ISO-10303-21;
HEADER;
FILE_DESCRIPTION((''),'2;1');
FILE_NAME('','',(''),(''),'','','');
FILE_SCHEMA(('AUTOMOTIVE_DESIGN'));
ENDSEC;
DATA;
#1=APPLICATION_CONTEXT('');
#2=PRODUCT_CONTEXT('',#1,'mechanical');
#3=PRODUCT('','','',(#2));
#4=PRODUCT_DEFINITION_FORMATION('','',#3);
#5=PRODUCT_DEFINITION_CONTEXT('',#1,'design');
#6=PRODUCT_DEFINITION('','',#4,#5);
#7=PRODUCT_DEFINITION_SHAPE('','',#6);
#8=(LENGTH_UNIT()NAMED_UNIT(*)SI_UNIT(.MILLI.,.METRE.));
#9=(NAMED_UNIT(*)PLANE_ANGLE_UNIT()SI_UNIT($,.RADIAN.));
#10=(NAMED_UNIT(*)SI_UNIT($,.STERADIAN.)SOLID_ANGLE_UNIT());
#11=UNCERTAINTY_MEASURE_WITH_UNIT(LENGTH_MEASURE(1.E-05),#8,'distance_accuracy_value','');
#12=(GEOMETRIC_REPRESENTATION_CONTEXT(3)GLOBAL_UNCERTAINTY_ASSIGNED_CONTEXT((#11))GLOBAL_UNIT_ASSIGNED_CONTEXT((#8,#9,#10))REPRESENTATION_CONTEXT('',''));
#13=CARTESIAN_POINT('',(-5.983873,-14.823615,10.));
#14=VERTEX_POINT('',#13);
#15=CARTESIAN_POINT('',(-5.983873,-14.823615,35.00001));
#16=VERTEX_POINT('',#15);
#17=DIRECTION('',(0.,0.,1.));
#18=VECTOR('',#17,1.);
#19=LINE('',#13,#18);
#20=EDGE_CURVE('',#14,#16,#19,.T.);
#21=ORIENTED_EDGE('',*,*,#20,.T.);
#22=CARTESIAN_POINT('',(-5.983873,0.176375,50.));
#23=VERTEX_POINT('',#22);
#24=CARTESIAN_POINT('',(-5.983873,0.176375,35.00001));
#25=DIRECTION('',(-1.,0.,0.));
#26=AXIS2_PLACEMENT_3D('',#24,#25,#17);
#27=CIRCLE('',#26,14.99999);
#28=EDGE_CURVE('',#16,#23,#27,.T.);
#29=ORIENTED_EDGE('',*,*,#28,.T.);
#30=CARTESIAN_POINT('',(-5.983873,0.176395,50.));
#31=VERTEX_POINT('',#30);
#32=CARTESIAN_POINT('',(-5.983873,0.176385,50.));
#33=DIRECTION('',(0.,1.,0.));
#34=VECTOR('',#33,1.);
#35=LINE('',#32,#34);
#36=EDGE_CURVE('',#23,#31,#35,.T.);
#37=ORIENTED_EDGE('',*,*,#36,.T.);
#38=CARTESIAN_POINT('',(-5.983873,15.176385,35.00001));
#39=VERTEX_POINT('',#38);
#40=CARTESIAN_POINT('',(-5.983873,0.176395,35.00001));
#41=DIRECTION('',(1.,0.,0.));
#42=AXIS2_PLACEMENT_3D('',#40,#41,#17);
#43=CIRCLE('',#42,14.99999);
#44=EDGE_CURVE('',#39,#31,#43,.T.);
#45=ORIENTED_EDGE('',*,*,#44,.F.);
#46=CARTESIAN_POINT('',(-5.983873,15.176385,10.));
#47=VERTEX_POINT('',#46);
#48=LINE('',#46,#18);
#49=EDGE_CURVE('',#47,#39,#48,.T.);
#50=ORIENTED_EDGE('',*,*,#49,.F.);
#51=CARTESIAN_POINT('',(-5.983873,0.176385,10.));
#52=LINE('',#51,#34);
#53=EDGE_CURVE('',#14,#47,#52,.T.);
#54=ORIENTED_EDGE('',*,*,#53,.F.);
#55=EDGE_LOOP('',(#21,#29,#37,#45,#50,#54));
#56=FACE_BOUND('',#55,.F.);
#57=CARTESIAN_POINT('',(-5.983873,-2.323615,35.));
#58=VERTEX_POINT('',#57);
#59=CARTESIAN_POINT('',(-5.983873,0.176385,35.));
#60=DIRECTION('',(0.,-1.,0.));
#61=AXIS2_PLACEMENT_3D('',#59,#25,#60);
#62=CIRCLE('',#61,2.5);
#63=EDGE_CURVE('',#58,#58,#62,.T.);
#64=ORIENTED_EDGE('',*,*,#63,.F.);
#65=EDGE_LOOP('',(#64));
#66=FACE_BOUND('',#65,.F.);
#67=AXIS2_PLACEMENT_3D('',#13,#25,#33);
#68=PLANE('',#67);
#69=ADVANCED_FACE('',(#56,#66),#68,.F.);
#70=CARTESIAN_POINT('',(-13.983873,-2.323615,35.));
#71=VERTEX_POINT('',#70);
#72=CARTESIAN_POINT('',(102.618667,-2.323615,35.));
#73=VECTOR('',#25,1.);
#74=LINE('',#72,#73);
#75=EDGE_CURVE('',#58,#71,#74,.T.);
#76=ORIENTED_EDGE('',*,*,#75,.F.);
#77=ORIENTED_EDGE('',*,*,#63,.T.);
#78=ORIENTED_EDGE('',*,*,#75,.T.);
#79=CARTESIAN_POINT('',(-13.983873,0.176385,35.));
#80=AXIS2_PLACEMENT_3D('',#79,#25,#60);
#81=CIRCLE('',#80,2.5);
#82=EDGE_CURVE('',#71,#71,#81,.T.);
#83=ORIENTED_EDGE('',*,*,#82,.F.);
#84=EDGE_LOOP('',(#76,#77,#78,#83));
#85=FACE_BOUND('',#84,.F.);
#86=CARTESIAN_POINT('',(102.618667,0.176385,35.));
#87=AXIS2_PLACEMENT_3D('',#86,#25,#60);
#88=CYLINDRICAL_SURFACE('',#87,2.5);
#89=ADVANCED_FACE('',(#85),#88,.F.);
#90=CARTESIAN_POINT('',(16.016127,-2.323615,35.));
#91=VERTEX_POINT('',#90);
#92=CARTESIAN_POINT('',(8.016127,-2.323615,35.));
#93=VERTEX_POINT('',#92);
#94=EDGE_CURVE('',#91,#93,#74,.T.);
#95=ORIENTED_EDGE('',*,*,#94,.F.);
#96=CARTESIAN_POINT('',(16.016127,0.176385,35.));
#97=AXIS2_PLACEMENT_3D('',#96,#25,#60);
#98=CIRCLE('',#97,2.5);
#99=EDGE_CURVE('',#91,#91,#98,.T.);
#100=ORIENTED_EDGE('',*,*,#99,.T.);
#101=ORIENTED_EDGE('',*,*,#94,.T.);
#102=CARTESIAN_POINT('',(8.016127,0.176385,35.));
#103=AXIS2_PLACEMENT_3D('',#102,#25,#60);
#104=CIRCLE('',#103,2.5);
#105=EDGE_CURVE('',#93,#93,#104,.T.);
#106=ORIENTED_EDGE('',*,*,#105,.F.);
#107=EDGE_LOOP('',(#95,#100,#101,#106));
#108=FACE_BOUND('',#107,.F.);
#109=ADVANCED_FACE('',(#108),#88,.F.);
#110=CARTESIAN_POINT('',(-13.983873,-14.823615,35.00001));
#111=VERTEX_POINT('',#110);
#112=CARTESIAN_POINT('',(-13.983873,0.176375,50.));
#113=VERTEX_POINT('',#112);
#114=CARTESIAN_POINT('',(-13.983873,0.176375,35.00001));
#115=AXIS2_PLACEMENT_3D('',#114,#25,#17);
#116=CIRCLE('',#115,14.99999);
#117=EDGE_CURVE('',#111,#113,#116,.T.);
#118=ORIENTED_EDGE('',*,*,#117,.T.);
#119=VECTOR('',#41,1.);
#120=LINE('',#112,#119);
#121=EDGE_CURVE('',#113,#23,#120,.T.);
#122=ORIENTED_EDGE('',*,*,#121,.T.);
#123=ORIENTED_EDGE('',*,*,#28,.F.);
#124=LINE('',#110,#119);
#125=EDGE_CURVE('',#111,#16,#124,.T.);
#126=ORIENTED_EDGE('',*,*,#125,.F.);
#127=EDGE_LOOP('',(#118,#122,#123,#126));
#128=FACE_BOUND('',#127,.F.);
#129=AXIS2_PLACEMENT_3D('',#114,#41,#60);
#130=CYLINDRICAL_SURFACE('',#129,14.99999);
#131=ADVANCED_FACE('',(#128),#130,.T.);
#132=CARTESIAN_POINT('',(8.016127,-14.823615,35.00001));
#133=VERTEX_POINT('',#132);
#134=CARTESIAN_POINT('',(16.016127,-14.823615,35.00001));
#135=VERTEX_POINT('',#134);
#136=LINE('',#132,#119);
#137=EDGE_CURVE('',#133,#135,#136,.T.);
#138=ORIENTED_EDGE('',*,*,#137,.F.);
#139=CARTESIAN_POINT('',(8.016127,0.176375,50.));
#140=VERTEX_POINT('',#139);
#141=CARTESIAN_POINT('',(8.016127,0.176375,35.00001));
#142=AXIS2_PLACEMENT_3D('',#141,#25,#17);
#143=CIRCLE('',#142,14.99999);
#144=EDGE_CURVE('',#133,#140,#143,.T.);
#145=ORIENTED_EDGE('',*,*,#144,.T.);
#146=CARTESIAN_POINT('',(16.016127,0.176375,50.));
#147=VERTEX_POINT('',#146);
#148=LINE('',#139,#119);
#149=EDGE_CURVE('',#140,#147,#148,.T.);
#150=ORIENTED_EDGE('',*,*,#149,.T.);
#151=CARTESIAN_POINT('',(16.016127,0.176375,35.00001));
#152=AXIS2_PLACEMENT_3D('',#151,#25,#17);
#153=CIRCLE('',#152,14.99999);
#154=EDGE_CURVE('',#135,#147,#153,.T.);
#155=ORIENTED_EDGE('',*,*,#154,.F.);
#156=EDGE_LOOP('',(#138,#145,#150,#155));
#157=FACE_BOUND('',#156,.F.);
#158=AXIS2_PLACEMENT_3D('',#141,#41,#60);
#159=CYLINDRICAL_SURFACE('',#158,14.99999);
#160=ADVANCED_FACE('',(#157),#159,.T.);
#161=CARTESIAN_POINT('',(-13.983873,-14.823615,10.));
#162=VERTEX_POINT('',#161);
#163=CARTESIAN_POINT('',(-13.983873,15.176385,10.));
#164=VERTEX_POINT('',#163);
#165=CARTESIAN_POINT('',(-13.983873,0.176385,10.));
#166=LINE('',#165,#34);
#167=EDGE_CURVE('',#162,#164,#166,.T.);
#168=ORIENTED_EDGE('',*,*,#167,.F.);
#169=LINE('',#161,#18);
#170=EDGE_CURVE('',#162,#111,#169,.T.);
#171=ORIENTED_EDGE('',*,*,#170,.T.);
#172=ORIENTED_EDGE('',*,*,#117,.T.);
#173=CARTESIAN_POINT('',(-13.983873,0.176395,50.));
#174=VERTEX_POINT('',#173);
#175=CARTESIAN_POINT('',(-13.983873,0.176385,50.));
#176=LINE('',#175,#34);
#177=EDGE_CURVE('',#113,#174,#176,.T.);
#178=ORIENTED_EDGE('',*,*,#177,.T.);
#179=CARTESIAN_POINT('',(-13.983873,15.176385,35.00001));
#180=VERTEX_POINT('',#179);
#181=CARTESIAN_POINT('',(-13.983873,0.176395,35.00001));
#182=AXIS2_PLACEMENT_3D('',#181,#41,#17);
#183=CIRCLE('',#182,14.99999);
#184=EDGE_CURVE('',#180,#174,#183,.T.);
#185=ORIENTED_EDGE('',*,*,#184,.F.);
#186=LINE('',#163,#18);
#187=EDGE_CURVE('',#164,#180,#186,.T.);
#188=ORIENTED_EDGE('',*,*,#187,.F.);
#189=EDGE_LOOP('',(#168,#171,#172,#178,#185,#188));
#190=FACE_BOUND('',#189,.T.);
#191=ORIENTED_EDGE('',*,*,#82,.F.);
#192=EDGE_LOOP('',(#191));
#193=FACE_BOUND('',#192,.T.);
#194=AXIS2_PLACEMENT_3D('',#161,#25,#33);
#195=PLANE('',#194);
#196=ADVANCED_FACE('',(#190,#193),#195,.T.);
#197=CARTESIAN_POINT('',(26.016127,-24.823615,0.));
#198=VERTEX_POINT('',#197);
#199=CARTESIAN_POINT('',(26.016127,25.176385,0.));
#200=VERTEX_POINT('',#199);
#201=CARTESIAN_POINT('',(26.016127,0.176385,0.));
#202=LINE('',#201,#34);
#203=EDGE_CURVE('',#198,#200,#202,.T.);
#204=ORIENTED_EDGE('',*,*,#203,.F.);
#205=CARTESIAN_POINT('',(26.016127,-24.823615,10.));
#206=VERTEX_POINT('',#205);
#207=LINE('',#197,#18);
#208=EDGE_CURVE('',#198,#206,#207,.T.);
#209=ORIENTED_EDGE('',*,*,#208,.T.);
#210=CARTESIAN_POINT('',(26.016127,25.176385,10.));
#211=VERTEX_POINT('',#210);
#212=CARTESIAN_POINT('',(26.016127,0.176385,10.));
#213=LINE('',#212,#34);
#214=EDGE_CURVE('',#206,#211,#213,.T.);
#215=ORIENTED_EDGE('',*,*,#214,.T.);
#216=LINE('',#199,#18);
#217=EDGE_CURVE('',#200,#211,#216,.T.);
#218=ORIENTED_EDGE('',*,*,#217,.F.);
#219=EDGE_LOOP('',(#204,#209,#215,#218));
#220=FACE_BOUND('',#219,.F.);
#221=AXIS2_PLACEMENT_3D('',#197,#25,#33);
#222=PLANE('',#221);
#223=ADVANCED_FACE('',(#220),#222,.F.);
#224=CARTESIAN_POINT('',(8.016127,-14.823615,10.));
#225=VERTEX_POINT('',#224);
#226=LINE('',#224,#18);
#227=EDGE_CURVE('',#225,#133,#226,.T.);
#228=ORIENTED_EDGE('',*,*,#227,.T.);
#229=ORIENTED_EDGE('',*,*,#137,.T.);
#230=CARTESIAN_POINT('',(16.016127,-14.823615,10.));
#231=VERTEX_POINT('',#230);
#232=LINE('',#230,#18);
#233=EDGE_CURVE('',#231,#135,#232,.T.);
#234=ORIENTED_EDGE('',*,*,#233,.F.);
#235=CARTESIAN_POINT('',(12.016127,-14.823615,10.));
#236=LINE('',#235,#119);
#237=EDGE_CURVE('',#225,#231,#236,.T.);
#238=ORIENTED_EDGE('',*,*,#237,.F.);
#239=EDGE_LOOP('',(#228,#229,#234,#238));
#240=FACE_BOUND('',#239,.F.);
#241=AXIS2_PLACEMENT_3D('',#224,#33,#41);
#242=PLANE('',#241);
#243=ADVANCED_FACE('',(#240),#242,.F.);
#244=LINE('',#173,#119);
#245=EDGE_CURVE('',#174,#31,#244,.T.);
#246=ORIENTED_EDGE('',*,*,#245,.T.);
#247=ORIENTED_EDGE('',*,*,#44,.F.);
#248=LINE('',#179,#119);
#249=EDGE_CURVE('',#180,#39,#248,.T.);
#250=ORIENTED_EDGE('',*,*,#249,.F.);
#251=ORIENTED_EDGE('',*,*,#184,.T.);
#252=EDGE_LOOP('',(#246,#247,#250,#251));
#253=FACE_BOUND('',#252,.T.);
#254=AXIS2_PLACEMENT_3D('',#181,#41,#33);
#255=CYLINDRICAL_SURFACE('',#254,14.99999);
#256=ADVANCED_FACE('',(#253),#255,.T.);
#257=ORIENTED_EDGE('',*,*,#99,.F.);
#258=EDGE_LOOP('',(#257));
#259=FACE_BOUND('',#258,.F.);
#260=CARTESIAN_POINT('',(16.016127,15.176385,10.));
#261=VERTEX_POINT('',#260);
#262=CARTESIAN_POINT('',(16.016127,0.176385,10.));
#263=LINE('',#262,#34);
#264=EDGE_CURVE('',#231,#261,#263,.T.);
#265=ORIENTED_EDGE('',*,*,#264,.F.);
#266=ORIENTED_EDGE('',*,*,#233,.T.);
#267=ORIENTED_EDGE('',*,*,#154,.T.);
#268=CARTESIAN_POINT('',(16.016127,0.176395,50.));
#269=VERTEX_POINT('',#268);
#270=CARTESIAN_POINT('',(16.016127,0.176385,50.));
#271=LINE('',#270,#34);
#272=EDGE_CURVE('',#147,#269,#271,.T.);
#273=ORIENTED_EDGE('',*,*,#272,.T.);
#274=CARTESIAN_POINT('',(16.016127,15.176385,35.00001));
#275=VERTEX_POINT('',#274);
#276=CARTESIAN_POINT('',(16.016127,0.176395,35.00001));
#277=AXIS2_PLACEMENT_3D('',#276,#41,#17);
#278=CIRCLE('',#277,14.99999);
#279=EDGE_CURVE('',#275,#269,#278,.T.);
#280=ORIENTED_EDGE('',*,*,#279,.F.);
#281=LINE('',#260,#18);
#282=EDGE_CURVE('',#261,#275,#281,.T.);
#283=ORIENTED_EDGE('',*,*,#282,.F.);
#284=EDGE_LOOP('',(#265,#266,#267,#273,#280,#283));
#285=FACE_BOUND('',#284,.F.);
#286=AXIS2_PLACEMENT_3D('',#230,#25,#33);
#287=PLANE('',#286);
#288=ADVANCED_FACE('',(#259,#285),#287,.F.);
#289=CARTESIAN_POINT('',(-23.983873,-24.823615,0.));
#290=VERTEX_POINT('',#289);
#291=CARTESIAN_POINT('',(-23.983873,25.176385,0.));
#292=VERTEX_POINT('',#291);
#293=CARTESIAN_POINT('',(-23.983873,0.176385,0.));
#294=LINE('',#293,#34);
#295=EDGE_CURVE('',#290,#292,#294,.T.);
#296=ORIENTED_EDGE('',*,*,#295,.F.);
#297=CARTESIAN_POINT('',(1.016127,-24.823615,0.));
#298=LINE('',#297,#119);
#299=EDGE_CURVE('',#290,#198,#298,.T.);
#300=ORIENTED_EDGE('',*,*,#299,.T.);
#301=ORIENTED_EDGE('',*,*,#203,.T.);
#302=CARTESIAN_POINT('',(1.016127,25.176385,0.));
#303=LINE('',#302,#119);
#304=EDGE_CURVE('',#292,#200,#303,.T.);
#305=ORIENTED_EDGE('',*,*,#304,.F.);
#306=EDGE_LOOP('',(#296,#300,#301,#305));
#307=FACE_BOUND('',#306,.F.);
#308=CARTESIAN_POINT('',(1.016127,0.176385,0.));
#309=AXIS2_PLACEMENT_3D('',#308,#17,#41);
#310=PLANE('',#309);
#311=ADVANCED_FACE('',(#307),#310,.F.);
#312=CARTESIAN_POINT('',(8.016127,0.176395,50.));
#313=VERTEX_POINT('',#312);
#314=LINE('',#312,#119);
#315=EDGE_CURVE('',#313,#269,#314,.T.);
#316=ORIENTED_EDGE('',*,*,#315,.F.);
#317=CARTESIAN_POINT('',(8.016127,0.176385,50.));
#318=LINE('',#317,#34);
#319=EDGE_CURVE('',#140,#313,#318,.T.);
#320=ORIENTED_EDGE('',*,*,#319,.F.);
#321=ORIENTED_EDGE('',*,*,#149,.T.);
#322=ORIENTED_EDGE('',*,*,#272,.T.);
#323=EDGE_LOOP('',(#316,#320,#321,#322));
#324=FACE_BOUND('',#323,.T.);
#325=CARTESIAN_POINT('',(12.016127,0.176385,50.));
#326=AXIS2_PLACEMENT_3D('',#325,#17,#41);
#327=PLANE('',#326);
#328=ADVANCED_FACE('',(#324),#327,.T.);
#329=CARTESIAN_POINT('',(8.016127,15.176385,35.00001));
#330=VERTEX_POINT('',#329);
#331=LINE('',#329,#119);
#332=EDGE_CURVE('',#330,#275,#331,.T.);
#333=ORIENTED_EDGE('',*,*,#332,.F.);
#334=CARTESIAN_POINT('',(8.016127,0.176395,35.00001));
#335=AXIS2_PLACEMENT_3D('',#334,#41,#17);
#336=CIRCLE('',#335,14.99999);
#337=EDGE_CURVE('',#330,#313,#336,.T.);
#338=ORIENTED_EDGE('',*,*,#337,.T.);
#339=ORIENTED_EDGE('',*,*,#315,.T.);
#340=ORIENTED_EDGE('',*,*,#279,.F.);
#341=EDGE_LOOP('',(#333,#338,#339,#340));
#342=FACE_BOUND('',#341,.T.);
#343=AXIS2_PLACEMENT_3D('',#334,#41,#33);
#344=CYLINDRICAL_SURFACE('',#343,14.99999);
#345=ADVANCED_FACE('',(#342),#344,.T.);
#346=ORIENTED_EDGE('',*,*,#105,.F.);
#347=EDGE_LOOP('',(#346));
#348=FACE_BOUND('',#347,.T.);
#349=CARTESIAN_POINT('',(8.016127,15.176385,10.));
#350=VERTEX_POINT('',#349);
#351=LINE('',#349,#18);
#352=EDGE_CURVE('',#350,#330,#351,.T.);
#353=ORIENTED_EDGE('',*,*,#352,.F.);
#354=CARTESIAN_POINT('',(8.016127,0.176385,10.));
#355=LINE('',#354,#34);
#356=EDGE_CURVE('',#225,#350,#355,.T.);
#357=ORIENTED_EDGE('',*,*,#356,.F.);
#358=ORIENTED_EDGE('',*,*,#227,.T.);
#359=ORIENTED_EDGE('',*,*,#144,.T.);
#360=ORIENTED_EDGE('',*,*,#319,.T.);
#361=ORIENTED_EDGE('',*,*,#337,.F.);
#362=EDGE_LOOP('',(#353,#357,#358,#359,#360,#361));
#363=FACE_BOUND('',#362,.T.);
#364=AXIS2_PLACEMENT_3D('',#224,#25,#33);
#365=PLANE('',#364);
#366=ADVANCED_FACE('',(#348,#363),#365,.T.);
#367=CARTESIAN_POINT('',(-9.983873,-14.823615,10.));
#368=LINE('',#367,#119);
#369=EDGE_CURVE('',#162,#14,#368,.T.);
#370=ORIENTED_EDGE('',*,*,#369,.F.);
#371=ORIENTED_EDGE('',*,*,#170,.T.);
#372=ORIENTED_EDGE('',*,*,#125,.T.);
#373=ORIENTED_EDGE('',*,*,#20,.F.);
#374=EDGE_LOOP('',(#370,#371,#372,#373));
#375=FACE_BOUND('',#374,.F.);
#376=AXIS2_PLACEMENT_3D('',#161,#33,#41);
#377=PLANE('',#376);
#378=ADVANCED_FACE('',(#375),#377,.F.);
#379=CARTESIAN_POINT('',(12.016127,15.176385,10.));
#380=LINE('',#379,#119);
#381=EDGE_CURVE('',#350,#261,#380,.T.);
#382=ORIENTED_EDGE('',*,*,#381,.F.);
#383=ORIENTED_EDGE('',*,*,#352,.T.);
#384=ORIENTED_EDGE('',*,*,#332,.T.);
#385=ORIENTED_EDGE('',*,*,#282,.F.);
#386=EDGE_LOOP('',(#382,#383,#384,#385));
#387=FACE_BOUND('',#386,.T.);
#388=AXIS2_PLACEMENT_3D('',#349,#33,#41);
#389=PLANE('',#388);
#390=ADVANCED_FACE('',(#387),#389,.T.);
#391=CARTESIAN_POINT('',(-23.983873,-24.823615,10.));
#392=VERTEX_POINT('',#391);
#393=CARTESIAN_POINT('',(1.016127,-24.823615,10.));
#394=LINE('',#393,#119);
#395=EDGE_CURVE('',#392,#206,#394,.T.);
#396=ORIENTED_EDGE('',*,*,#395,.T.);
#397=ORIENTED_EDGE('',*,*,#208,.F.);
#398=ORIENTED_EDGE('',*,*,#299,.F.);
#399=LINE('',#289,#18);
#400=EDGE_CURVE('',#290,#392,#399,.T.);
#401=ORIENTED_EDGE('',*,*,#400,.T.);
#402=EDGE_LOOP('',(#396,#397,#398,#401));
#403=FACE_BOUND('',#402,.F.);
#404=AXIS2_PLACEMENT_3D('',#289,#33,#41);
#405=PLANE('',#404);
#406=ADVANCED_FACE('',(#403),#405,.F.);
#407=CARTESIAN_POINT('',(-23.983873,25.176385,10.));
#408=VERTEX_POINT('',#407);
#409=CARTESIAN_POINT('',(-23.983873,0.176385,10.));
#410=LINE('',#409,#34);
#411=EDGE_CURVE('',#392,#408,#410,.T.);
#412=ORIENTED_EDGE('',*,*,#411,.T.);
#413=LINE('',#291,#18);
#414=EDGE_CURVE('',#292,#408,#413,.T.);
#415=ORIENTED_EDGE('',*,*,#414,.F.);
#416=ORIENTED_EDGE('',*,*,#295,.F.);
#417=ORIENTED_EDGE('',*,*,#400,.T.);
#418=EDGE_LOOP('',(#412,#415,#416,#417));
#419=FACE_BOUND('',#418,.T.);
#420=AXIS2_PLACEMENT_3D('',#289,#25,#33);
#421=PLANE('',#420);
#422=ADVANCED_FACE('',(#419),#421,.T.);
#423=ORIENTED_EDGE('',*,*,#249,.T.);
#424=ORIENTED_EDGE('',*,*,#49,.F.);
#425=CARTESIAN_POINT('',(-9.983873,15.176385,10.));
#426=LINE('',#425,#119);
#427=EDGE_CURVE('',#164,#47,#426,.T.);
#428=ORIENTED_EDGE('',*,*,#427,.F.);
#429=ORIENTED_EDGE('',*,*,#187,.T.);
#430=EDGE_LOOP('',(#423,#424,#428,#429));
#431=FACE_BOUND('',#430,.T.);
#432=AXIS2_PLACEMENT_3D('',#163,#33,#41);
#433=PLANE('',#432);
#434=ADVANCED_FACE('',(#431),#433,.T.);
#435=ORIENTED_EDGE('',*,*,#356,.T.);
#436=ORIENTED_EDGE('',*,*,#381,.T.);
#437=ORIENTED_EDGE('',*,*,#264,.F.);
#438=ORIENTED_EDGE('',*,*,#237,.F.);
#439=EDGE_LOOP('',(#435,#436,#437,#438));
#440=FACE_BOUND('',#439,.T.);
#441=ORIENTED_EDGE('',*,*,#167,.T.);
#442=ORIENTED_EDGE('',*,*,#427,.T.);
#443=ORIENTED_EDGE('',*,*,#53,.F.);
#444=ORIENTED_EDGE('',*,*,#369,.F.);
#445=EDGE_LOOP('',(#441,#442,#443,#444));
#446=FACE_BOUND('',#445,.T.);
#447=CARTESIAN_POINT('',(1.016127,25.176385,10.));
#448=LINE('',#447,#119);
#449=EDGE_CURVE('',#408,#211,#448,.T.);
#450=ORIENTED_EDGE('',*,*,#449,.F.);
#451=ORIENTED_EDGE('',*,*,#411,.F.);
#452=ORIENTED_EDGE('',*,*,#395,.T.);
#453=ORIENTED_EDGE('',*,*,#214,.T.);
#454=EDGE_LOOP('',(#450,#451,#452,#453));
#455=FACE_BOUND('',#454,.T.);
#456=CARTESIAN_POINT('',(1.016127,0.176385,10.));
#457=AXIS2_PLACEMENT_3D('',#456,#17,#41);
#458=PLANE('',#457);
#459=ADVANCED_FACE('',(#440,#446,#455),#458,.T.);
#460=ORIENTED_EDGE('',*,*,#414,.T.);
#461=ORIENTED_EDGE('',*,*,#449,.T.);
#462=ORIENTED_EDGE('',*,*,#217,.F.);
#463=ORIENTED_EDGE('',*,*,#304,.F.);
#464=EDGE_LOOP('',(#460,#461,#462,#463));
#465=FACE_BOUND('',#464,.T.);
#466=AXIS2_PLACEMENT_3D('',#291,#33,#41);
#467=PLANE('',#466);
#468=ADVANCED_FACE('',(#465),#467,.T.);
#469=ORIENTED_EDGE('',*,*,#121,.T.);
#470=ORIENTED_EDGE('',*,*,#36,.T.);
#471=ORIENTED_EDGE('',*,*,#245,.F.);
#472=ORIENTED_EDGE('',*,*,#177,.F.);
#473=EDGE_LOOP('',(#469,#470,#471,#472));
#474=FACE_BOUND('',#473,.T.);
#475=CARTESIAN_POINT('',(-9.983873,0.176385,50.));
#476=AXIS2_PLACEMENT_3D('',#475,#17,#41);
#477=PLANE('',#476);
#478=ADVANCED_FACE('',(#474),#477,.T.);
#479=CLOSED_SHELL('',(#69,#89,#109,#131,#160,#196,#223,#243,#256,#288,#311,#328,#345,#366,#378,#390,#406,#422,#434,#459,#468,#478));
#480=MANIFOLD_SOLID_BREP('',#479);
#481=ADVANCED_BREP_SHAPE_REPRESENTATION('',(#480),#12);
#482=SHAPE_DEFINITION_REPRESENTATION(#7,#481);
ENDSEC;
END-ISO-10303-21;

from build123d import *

# Parameters (mm, degrees)
F0_W     = 50
F0_H     = 50
F1_DEPTH = 10
F2_W     = 8
F2_H     = 30
F3_DEPTH = 40
F4_R     = 14.99999
F6_D     = 5


# Not quite as in the source:
# - a fillet or chamfer is up to 0.001 mm smaller than in the source, because OpenCascade refuses the exact size


with BuildPart() as f1:
    # F0 (on Top) → F1 (new body)
    with BuildSketch(Plane.XY):
        with Locations((1.0161269456, 0.1763854405)):
            Rectangle(F0_W, F0_H)
    extrude(amount=F1_DEPTH)

    # F2 (on face) → F3 (join)
    with BuildSketch(Plane.XY.offset(10)):
        with Locations((-9.9838730544, 0.1763854405)):
            Rectangle(F2_W, F2_H)
        with Locations((12.0161269456, 0.1763854405)):
            Rectangle(F2_W, F2_H)
    extrude(amount=F3_DEPTH)

    # F4 (radius 15 in the source; OpenCascade refuses exactly that, so slightly less here)
    f4_edges = [f1.edges().sort_by_distance(p)[0] for p in [
        (12.016127, -14.823615, 50),
        (12.016127, 15.176385, 50),
        (-9.983873, -14.823615, 50),
        (-9.983873, 15.176385, 50),
    ]]
    fillet(f4_edges, radius=F4_R)

    # F6 (through all)
    with Locations(Plane.YZ.offset(16.0161269456)):
        with Locations((0.1763854405, 35)):
            Hole(F6_D / 2)


solid = f1.part
